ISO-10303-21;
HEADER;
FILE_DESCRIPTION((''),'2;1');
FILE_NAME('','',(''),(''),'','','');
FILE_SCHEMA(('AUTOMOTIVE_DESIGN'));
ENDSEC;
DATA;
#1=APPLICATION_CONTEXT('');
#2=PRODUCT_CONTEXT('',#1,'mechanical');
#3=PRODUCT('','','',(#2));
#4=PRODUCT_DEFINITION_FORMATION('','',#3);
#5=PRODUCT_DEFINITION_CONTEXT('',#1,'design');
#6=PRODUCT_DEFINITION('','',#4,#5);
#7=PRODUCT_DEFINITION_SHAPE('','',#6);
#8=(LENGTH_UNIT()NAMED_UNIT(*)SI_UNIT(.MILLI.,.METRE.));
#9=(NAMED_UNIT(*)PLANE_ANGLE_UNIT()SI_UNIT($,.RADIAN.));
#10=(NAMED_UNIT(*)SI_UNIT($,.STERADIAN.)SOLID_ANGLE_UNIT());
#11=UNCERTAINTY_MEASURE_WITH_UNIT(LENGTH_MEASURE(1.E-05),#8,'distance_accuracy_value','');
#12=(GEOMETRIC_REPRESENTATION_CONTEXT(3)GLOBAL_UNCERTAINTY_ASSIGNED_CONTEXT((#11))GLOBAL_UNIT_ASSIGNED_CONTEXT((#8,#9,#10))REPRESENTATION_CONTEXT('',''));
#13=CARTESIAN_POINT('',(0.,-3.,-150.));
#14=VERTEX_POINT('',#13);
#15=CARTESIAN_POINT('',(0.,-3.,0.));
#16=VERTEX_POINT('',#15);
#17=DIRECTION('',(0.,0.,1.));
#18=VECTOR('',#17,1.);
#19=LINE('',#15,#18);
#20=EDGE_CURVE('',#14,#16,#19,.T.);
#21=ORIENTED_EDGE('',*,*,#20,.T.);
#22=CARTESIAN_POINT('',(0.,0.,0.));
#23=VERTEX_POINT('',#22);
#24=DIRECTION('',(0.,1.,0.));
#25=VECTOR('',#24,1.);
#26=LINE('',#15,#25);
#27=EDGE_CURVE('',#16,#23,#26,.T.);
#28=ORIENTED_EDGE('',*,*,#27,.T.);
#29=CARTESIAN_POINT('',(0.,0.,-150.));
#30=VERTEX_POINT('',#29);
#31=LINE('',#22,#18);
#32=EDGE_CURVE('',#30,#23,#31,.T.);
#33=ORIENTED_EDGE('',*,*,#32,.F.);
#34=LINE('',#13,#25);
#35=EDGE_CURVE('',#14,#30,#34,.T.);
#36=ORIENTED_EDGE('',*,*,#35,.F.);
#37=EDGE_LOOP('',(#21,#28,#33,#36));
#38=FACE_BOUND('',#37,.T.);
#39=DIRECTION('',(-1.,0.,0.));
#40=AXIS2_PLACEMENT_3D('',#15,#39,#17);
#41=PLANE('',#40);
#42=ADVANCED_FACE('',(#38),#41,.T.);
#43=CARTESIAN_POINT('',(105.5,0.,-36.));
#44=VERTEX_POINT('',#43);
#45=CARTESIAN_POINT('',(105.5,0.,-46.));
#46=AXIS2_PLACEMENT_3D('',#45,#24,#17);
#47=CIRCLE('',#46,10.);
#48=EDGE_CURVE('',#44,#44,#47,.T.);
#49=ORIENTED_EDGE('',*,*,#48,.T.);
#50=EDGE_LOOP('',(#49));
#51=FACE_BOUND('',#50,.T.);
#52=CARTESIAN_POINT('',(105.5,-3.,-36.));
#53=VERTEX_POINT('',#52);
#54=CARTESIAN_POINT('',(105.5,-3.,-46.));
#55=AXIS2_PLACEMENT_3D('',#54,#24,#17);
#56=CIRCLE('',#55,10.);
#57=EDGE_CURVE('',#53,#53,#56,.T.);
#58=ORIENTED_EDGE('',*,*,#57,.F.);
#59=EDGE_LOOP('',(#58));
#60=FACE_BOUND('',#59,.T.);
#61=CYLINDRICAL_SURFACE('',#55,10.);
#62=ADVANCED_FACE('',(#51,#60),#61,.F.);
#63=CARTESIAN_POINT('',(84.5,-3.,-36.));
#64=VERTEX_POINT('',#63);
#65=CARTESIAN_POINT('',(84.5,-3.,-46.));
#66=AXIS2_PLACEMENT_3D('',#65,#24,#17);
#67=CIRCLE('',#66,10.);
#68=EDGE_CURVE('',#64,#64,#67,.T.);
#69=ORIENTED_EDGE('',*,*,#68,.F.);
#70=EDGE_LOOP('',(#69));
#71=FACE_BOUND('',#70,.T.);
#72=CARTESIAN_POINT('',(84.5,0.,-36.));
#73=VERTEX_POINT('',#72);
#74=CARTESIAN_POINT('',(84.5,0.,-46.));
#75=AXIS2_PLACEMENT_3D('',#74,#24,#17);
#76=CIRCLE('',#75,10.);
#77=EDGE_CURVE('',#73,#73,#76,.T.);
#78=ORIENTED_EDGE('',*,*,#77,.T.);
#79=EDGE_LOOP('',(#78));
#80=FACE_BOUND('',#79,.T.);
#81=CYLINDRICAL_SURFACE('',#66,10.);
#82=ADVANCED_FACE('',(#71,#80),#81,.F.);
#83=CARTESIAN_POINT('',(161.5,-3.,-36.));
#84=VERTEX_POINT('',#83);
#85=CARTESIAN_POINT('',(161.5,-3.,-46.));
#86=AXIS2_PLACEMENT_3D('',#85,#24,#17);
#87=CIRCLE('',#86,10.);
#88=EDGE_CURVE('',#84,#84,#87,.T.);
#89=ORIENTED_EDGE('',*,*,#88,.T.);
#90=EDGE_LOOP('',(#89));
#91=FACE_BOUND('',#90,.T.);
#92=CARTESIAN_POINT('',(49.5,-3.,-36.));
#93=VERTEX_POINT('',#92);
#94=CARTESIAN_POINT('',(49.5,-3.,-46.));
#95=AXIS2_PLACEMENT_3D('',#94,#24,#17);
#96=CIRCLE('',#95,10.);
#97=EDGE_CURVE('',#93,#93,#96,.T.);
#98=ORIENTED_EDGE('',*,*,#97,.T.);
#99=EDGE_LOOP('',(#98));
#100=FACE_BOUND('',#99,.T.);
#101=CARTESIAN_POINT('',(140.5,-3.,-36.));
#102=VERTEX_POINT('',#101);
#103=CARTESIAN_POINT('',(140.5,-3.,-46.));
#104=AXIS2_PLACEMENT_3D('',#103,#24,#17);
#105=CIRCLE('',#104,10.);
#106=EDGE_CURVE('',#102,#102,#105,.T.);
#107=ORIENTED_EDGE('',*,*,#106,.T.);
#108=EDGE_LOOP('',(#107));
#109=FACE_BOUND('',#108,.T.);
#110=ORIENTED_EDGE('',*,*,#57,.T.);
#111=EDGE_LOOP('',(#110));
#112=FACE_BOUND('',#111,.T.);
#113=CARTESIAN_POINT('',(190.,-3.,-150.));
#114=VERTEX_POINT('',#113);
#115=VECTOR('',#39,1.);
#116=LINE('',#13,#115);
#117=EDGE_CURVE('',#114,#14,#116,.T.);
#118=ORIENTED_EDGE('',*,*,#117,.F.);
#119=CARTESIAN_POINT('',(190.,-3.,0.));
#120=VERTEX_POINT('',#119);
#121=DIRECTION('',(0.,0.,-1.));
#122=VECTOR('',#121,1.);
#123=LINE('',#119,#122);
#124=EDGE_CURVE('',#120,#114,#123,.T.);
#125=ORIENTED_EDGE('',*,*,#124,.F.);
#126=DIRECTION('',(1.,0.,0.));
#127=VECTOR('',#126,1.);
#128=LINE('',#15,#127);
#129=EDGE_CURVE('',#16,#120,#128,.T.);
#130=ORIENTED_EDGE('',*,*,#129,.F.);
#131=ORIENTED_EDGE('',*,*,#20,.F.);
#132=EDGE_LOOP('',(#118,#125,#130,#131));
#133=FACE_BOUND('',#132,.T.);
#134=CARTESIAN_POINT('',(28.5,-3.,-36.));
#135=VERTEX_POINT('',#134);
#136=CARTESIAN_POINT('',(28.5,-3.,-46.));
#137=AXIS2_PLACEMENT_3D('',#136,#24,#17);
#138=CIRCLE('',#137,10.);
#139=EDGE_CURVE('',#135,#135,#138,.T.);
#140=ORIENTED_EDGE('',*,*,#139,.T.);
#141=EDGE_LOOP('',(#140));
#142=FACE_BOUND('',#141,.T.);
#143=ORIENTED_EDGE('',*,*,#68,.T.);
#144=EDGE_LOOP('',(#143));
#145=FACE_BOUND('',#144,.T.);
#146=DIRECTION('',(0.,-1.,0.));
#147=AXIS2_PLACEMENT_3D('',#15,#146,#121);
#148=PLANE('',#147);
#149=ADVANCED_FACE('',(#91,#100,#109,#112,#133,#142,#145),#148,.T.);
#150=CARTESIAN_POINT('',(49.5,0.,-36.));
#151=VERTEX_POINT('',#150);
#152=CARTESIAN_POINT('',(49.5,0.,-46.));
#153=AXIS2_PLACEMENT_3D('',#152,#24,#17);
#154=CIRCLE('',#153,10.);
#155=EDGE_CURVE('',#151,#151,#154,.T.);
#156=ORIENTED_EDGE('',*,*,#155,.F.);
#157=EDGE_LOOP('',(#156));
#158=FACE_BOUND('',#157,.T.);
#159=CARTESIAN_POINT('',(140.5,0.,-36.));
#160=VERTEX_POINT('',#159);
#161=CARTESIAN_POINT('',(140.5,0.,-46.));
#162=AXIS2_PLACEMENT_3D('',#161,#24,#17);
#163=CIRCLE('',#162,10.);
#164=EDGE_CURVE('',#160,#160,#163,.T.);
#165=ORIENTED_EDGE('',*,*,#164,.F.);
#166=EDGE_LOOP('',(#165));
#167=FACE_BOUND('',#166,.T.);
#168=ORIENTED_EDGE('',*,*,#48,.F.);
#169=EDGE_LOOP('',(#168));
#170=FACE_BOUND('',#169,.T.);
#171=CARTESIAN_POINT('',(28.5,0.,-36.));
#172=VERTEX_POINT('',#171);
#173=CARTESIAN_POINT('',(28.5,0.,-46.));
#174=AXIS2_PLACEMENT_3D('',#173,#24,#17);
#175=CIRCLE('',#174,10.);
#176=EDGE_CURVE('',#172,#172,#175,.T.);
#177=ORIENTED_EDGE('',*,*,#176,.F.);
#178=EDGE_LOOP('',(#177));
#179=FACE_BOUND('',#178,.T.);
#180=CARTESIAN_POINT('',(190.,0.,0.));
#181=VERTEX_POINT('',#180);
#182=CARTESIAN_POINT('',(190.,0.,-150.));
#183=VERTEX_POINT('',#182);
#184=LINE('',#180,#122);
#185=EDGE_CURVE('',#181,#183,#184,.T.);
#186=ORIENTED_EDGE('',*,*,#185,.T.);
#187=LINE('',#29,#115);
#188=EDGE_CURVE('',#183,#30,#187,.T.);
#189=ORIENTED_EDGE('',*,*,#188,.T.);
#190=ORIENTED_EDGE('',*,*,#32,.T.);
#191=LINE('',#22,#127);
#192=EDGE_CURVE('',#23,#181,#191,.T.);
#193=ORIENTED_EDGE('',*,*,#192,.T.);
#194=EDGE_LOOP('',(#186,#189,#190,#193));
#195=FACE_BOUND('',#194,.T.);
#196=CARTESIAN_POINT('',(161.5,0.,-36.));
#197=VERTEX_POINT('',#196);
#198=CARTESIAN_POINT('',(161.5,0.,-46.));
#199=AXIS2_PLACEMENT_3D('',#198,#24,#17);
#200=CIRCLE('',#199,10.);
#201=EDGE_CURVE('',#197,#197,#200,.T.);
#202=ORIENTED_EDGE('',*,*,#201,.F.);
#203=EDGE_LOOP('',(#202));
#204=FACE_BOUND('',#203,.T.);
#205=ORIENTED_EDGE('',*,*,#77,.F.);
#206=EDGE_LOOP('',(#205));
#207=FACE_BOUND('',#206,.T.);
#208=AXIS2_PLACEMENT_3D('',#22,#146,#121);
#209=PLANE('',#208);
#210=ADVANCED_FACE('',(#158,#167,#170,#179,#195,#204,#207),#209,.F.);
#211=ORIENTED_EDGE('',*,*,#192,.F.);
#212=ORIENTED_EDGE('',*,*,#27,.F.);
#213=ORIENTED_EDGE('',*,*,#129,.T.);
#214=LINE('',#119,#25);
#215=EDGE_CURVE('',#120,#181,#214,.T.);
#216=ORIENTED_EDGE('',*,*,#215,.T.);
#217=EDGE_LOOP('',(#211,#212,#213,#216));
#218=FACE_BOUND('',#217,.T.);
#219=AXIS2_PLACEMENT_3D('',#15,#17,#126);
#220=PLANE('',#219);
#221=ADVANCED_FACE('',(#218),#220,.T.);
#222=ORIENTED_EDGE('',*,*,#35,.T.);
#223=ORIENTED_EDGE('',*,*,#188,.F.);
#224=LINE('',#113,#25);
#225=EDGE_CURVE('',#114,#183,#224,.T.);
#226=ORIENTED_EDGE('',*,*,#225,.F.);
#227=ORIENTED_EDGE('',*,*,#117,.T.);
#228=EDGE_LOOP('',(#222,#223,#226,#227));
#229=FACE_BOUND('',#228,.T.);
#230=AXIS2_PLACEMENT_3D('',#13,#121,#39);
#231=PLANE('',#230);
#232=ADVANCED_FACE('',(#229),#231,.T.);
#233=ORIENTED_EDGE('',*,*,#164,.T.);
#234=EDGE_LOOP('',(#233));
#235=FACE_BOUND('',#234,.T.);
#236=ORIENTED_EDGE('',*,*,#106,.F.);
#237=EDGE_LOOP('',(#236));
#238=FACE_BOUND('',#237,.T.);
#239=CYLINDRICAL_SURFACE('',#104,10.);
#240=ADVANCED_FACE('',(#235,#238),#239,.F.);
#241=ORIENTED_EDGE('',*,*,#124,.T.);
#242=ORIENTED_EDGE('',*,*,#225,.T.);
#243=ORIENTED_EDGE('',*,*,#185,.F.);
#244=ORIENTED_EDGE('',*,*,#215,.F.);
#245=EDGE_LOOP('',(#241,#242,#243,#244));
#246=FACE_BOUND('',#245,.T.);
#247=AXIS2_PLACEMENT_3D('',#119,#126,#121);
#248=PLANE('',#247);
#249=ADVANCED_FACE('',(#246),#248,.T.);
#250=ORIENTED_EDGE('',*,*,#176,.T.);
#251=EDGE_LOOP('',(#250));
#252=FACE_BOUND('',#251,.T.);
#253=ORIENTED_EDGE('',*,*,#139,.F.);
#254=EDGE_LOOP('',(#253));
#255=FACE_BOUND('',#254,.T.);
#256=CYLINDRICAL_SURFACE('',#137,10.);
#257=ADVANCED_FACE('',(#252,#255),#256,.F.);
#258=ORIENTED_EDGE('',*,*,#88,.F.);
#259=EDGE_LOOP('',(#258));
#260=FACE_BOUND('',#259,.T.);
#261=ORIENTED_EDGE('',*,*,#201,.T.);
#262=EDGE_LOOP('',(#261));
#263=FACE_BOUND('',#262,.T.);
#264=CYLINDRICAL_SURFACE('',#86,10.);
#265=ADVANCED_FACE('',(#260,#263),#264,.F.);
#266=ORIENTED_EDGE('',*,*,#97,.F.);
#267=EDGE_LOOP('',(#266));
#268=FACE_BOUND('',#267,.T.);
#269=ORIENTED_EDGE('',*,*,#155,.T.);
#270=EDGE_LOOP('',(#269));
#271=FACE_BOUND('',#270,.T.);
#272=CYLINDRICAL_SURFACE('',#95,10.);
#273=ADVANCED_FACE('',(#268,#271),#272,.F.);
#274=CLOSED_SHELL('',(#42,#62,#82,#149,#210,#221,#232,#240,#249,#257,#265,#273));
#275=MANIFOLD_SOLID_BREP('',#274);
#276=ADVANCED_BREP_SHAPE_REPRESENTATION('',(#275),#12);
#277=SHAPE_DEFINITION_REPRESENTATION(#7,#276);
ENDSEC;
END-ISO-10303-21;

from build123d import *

# Parameters (mm, degrees)
SKETCH1_W          = 190
SKETCH1_H          = 150
SKETCH1_R          = 10
BASE_FLANGE1_DEPTH = 3


# Sheet-metal steps are written as plain solids
with BuildPart() as part:
    # Sketch1 → Base-Flange1 (new body)
    with BuildSketch(Plane(origin=(0, 0, 0), x_dir=(1, 0, 0), z_dir=(0, 1, 0))):
        with Locations((95, 75)):
            Rectangle(SKETCH1_W, SKETCH1_H)
        with Locations(Location((28.5, 46, 0), (0, 0, 270))):
            Circle(SKETCH1_R, mode=Mode.SUBTRACT)
        with Locations(Location((49.5, 46, 0), (0, 0, 270))):
            Circle(SKETCH1_R, mode=Mode.SUBTRACT)
        with Locations(Location((84.5, 46, 0), (0, 0, 270))):
            Circle(SKETCH1_R, mode=Mode.SUBTRACT)
        with Locations(Location((105.5, 46, 0), (0, 0, 270))):
            Circle(SKETCH1_R, mode=Mode.SUBTRACT)
        with Locations(Location((140.5, 46, 0), (0, 0, 270))):
            Circle(SKETCH1_R, mode=Mode.SUBTRACT)
        with Locations(Location((161.5, 46, 0), (0, 0, 270))):
            Circle(SKETCH1_R, mode=Mode.SUBTRACT)
    extrude(amount=-BASE_FLANGE1_DEPTH)


solid = part.part
